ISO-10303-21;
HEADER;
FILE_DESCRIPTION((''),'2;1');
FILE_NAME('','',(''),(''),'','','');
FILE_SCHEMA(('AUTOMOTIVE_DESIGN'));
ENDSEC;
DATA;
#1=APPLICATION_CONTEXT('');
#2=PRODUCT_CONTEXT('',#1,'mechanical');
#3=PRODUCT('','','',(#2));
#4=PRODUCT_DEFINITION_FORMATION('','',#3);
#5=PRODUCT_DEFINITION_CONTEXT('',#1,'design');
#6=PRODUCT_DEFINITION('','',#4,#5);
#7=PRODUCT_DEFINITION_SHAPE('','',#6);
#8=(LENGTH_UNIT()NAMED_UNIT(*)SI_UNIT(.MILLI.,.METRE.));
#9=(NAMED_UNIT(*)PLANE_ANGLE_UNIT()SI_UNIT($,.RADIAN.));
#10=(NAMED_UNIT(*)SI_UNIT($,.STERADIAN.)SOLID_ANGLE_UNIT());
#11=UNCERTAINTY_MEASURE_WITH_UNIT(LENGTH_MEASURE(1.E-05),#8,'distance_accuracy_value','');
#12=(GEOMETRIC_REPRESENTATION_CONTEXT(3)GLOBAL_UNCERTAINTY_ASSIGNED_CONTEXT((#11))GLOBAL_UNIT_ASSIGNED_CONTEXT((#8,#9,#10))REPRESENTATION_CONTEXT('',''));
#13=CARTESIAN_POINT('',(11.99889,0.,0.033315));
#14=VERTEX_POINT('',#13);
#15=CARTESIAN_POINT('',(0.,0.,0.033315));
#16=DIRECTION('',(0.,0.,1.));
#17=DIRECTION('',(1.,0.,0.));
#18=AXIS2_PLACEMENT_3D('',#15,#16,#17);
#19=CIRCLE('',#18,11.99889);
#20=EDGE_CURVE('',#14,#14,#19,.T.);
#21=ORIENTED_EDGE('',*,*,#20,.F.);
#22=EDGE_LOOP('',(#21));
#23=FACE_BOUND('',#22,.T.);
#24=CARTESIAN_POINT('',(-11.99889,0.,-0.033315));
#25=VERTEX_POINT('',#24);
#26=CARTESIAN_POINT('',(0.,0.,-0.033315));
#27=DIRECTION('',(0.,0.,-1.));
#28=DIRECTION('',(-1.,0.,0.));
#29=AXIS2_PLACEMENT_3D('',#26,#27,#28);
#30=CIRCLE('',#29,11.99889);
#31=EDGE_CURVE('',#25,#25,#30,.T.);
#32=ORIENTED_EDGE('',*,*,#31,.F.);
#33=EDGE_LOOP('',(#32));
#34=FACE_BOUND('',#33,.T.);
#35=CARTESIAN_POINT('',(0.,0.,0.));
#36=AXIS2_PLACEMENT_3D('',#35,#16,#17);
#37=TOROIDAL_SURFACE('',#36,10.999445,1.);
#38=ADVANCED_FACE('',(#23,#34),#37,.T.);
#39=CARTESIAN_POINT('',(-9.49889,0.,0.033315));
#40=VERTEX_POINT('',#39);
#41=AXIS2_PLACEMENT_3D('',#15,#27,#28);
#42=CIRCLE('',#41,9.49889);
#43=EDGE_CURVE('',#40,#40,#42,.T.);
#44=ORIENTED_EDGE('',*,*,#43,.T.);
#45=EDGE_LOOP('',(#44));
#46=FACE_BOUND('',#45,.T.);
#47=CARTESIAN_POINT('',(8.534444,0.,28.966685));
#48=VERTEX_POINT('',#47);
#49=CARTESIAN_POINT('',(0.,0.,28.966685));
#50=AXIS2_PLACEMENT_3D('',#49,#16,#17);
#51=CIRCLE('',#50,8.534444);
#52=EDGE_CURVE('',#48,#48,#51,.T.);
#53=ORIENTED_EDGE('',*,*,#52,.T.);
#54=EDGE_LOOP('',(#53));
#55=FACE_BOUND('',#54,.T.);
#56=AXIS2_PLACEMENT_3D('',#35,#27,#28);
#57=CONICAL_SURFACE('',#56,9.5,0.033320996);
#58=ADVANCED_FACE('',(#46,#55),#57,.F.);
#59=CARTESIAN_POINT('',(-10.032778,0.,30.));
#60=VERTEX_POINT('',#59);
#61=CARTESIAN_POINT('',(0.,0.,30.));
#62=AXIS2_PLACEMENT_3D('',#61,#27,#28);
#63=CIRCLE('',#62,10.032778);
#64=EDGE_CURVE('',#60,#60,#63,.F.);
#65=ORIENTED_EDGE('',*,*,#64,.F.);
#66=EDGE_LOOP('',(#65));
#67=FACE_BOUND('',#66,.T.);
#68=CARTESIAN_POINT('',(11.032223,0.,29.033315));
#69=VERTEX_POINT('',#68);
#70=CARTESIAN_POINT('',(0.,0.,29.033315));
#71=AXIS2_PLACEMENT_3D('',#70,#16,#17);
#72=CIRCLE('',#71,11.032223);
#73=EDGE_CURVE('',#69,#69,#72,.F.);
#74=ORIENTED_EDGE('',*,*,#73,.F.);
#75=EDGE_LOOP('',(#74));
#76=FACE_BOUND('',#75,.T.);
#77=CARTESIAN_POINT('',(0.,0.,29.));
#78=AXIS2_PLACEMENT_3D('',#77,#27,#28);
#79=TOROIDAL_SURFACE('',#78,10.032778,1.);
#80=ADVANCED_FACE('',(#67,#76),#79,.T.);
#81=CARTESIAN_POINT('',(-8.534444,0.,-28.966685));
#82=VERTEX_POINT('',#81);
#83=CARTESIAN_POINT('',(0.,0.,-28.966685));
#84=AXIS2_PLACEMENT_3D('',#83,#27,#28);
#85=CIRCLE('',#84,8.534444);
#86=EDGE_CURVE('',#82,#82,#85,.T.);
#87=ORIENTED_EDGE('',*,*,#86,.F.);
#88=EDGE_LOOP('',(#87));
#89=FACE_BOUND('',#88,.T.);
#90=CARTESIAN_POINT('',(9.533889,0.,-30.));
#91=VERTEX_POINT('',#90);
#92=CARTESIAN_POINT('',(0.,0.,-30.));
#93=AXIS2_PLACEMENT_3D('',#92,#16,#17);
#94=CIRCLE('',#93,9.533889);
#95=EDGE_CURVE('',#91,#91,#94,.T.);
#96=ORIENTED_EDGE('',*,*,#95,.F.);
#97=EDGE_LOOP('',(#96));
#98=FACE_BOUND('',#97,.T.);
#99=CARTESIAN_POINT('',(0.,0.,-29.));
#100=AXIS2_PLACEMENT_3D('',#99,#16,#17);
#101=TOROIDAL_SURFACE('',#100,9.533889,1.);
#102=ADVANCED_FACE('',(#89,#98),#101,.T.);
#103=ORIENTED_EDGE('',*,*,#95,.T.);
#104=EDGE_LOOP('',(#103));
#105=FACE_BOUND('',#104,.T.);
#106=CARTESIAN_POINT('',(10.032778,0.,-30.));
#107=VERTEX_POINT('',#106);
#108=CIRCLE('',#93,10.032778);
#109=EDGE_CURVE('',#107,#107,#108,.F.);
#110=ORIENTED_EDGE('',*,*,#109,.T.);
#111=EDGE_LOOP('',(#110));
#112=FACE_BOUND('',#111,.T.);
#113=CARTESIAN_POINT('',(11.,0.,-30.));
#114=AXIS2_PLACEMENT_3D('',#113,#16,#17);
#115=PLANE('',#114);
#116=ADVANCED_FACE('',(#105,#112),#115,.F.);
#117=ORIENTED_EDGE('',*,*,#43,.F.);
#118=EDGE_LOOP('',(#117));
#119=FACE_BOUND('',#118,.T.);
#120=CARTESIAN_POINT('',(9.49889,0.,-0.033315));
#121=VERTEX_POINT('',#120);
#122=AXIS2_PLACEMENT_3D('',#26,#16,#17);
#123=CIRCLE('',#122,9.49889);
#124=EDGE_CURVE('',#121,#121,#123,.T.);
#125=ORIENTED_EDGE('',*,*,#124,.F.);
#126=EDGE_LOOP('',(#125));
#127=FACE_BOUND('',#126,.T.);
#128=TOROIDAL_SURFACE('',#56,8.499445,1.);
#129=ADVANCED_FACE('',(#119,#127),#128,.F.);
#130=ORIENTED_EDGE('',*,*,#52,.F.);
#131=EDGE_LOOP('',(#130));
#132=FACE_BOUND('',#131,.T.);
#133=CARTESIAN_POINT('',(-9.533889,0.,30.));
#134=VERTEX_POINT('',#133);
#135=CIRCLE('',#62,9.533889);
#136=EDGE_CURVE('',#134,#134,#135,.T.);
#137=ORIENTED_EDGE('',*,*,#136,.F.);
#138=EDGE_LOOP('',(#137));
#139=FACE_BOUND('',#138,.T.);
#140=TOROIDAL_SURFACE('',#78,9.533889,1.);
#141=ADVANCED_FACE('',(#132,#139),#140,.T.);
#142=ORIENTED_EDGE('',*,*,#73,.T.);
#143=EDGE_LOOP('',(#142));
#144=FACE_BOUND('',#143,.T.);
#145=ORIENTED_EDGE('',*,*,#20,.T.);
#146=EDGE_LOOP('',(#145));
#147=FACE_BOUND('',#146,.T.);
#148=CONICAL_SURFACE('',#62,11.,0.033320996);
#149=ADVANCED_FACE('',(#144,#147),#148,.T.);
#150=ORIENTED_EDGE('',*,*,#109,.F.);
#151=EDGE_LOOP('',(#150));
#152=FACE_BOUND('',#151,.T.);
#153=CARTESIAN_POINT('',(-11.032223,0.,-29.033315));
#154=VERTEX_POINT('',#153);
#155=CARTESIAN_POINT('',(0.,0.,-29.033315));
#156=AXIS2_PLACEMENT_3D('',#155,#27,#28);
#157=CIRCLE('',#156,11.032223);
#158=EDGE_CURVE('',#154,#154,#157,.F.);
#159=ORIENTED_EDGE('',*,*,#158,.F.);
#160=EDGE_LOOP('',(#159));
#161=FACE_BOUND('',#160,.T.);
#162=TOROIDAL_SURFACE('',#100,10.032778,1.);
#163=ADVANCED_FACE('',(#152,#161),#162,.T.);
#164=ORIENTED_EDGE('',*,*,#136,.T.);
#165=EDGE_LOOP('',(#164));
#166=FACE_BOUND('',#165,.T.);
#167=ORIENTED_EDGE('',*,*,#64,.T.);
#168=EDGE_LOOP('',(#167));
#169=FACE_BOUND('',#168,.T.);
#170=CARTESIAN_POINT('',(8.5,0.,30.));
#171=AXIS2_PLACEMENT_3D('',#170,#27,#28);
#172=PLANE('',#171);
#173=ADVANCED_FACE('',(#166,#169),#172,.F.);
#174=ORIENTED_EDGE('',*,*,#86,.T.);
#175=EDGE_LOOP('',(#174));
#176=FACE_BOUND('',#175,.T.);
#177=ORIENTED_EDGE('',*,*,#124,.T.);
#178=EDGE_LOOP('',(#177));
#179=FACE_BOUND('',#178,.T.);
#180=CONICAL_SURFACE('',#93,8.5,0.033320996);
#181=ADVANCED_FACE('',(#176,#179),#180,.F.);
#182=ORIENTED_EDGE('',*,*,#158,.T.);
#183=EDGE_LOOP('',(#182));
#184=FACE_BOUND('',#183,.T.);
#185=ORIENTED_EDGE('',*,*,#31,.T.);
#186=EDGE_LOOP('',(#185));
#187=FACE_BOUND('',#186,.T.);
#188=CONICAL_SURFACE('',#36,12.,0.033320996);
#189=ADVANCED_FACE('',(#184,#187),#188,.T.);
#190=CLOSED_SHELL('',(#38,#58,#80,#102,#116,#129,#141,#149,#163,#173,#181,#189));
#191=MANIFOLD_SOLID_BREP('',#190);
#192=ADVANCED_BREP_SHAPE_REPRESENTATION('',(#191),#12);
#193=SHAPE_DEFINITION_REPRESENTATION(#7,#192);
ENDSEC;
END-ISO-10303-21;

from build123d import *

# Parameters (mm, degrees)
FILLET3_R = 1
FILLET4_R = 1


with BuildPart() as part:
    # Sketch1 → Revolve1 (revolve)
    with BuildSketch(Plane(origin=(0, 0, 0), x_dir=(1, 0, 0), z_dir=(0, 1, 0)), mode=Mode.PRIVATE) as revolve1_sk:
        Polygon((8.5, 30), (9.5, 0), (8.5, -30), (11, -30), (12, 0), (11, 30), align=None)
    revolve(revolve1_sk.sketch.rotate(Axis((0, 0, -39.2734375), (0, 0, 1)), 180), axis=Axis((0, 0, -39.2734375), (0, 0, 1)))

    # Fillet3
    fillet3_edges = [part.edges().sort_by_distance(p)[0] for p in [
        (11, 0, -30),
        (12, 0, 0),
        (11, 0, 30),
        (8.5, 0, 30),
        (8.5, 0, -30),
    ]]
    fillet(fillet3_edges, radius=FILLET3_R)

    # Fillet4
    # the kernel refuses this fillet: 1 mm, written as the material it adds along each edge
    with BuildSketch(Plane(origin=(0, 0, 0), x_dir=(-1, 0, 0), z_dir=(0, 1, 0))) as fillet4_piece_1:
        with BuildLine():
            CenterArc((9.5 - FILLET4_R * 1.00055540132, 0), FILLET4_R, 358.090847567, 3.818304866)
            Line((9.5 - FILLET4_R * 0.00111049434109, FILLET4_R * 0.0333148302326), (9.5, 0))
            Line((9.5, 0), (9.5 - FILLET4_R * 0.00111049434109, -FILLET4_R * 0.0333148302326))
        make_face()
    revolve(axis=Axis((0, 0, 0), (0, 0, 1)))


solid = part.part
